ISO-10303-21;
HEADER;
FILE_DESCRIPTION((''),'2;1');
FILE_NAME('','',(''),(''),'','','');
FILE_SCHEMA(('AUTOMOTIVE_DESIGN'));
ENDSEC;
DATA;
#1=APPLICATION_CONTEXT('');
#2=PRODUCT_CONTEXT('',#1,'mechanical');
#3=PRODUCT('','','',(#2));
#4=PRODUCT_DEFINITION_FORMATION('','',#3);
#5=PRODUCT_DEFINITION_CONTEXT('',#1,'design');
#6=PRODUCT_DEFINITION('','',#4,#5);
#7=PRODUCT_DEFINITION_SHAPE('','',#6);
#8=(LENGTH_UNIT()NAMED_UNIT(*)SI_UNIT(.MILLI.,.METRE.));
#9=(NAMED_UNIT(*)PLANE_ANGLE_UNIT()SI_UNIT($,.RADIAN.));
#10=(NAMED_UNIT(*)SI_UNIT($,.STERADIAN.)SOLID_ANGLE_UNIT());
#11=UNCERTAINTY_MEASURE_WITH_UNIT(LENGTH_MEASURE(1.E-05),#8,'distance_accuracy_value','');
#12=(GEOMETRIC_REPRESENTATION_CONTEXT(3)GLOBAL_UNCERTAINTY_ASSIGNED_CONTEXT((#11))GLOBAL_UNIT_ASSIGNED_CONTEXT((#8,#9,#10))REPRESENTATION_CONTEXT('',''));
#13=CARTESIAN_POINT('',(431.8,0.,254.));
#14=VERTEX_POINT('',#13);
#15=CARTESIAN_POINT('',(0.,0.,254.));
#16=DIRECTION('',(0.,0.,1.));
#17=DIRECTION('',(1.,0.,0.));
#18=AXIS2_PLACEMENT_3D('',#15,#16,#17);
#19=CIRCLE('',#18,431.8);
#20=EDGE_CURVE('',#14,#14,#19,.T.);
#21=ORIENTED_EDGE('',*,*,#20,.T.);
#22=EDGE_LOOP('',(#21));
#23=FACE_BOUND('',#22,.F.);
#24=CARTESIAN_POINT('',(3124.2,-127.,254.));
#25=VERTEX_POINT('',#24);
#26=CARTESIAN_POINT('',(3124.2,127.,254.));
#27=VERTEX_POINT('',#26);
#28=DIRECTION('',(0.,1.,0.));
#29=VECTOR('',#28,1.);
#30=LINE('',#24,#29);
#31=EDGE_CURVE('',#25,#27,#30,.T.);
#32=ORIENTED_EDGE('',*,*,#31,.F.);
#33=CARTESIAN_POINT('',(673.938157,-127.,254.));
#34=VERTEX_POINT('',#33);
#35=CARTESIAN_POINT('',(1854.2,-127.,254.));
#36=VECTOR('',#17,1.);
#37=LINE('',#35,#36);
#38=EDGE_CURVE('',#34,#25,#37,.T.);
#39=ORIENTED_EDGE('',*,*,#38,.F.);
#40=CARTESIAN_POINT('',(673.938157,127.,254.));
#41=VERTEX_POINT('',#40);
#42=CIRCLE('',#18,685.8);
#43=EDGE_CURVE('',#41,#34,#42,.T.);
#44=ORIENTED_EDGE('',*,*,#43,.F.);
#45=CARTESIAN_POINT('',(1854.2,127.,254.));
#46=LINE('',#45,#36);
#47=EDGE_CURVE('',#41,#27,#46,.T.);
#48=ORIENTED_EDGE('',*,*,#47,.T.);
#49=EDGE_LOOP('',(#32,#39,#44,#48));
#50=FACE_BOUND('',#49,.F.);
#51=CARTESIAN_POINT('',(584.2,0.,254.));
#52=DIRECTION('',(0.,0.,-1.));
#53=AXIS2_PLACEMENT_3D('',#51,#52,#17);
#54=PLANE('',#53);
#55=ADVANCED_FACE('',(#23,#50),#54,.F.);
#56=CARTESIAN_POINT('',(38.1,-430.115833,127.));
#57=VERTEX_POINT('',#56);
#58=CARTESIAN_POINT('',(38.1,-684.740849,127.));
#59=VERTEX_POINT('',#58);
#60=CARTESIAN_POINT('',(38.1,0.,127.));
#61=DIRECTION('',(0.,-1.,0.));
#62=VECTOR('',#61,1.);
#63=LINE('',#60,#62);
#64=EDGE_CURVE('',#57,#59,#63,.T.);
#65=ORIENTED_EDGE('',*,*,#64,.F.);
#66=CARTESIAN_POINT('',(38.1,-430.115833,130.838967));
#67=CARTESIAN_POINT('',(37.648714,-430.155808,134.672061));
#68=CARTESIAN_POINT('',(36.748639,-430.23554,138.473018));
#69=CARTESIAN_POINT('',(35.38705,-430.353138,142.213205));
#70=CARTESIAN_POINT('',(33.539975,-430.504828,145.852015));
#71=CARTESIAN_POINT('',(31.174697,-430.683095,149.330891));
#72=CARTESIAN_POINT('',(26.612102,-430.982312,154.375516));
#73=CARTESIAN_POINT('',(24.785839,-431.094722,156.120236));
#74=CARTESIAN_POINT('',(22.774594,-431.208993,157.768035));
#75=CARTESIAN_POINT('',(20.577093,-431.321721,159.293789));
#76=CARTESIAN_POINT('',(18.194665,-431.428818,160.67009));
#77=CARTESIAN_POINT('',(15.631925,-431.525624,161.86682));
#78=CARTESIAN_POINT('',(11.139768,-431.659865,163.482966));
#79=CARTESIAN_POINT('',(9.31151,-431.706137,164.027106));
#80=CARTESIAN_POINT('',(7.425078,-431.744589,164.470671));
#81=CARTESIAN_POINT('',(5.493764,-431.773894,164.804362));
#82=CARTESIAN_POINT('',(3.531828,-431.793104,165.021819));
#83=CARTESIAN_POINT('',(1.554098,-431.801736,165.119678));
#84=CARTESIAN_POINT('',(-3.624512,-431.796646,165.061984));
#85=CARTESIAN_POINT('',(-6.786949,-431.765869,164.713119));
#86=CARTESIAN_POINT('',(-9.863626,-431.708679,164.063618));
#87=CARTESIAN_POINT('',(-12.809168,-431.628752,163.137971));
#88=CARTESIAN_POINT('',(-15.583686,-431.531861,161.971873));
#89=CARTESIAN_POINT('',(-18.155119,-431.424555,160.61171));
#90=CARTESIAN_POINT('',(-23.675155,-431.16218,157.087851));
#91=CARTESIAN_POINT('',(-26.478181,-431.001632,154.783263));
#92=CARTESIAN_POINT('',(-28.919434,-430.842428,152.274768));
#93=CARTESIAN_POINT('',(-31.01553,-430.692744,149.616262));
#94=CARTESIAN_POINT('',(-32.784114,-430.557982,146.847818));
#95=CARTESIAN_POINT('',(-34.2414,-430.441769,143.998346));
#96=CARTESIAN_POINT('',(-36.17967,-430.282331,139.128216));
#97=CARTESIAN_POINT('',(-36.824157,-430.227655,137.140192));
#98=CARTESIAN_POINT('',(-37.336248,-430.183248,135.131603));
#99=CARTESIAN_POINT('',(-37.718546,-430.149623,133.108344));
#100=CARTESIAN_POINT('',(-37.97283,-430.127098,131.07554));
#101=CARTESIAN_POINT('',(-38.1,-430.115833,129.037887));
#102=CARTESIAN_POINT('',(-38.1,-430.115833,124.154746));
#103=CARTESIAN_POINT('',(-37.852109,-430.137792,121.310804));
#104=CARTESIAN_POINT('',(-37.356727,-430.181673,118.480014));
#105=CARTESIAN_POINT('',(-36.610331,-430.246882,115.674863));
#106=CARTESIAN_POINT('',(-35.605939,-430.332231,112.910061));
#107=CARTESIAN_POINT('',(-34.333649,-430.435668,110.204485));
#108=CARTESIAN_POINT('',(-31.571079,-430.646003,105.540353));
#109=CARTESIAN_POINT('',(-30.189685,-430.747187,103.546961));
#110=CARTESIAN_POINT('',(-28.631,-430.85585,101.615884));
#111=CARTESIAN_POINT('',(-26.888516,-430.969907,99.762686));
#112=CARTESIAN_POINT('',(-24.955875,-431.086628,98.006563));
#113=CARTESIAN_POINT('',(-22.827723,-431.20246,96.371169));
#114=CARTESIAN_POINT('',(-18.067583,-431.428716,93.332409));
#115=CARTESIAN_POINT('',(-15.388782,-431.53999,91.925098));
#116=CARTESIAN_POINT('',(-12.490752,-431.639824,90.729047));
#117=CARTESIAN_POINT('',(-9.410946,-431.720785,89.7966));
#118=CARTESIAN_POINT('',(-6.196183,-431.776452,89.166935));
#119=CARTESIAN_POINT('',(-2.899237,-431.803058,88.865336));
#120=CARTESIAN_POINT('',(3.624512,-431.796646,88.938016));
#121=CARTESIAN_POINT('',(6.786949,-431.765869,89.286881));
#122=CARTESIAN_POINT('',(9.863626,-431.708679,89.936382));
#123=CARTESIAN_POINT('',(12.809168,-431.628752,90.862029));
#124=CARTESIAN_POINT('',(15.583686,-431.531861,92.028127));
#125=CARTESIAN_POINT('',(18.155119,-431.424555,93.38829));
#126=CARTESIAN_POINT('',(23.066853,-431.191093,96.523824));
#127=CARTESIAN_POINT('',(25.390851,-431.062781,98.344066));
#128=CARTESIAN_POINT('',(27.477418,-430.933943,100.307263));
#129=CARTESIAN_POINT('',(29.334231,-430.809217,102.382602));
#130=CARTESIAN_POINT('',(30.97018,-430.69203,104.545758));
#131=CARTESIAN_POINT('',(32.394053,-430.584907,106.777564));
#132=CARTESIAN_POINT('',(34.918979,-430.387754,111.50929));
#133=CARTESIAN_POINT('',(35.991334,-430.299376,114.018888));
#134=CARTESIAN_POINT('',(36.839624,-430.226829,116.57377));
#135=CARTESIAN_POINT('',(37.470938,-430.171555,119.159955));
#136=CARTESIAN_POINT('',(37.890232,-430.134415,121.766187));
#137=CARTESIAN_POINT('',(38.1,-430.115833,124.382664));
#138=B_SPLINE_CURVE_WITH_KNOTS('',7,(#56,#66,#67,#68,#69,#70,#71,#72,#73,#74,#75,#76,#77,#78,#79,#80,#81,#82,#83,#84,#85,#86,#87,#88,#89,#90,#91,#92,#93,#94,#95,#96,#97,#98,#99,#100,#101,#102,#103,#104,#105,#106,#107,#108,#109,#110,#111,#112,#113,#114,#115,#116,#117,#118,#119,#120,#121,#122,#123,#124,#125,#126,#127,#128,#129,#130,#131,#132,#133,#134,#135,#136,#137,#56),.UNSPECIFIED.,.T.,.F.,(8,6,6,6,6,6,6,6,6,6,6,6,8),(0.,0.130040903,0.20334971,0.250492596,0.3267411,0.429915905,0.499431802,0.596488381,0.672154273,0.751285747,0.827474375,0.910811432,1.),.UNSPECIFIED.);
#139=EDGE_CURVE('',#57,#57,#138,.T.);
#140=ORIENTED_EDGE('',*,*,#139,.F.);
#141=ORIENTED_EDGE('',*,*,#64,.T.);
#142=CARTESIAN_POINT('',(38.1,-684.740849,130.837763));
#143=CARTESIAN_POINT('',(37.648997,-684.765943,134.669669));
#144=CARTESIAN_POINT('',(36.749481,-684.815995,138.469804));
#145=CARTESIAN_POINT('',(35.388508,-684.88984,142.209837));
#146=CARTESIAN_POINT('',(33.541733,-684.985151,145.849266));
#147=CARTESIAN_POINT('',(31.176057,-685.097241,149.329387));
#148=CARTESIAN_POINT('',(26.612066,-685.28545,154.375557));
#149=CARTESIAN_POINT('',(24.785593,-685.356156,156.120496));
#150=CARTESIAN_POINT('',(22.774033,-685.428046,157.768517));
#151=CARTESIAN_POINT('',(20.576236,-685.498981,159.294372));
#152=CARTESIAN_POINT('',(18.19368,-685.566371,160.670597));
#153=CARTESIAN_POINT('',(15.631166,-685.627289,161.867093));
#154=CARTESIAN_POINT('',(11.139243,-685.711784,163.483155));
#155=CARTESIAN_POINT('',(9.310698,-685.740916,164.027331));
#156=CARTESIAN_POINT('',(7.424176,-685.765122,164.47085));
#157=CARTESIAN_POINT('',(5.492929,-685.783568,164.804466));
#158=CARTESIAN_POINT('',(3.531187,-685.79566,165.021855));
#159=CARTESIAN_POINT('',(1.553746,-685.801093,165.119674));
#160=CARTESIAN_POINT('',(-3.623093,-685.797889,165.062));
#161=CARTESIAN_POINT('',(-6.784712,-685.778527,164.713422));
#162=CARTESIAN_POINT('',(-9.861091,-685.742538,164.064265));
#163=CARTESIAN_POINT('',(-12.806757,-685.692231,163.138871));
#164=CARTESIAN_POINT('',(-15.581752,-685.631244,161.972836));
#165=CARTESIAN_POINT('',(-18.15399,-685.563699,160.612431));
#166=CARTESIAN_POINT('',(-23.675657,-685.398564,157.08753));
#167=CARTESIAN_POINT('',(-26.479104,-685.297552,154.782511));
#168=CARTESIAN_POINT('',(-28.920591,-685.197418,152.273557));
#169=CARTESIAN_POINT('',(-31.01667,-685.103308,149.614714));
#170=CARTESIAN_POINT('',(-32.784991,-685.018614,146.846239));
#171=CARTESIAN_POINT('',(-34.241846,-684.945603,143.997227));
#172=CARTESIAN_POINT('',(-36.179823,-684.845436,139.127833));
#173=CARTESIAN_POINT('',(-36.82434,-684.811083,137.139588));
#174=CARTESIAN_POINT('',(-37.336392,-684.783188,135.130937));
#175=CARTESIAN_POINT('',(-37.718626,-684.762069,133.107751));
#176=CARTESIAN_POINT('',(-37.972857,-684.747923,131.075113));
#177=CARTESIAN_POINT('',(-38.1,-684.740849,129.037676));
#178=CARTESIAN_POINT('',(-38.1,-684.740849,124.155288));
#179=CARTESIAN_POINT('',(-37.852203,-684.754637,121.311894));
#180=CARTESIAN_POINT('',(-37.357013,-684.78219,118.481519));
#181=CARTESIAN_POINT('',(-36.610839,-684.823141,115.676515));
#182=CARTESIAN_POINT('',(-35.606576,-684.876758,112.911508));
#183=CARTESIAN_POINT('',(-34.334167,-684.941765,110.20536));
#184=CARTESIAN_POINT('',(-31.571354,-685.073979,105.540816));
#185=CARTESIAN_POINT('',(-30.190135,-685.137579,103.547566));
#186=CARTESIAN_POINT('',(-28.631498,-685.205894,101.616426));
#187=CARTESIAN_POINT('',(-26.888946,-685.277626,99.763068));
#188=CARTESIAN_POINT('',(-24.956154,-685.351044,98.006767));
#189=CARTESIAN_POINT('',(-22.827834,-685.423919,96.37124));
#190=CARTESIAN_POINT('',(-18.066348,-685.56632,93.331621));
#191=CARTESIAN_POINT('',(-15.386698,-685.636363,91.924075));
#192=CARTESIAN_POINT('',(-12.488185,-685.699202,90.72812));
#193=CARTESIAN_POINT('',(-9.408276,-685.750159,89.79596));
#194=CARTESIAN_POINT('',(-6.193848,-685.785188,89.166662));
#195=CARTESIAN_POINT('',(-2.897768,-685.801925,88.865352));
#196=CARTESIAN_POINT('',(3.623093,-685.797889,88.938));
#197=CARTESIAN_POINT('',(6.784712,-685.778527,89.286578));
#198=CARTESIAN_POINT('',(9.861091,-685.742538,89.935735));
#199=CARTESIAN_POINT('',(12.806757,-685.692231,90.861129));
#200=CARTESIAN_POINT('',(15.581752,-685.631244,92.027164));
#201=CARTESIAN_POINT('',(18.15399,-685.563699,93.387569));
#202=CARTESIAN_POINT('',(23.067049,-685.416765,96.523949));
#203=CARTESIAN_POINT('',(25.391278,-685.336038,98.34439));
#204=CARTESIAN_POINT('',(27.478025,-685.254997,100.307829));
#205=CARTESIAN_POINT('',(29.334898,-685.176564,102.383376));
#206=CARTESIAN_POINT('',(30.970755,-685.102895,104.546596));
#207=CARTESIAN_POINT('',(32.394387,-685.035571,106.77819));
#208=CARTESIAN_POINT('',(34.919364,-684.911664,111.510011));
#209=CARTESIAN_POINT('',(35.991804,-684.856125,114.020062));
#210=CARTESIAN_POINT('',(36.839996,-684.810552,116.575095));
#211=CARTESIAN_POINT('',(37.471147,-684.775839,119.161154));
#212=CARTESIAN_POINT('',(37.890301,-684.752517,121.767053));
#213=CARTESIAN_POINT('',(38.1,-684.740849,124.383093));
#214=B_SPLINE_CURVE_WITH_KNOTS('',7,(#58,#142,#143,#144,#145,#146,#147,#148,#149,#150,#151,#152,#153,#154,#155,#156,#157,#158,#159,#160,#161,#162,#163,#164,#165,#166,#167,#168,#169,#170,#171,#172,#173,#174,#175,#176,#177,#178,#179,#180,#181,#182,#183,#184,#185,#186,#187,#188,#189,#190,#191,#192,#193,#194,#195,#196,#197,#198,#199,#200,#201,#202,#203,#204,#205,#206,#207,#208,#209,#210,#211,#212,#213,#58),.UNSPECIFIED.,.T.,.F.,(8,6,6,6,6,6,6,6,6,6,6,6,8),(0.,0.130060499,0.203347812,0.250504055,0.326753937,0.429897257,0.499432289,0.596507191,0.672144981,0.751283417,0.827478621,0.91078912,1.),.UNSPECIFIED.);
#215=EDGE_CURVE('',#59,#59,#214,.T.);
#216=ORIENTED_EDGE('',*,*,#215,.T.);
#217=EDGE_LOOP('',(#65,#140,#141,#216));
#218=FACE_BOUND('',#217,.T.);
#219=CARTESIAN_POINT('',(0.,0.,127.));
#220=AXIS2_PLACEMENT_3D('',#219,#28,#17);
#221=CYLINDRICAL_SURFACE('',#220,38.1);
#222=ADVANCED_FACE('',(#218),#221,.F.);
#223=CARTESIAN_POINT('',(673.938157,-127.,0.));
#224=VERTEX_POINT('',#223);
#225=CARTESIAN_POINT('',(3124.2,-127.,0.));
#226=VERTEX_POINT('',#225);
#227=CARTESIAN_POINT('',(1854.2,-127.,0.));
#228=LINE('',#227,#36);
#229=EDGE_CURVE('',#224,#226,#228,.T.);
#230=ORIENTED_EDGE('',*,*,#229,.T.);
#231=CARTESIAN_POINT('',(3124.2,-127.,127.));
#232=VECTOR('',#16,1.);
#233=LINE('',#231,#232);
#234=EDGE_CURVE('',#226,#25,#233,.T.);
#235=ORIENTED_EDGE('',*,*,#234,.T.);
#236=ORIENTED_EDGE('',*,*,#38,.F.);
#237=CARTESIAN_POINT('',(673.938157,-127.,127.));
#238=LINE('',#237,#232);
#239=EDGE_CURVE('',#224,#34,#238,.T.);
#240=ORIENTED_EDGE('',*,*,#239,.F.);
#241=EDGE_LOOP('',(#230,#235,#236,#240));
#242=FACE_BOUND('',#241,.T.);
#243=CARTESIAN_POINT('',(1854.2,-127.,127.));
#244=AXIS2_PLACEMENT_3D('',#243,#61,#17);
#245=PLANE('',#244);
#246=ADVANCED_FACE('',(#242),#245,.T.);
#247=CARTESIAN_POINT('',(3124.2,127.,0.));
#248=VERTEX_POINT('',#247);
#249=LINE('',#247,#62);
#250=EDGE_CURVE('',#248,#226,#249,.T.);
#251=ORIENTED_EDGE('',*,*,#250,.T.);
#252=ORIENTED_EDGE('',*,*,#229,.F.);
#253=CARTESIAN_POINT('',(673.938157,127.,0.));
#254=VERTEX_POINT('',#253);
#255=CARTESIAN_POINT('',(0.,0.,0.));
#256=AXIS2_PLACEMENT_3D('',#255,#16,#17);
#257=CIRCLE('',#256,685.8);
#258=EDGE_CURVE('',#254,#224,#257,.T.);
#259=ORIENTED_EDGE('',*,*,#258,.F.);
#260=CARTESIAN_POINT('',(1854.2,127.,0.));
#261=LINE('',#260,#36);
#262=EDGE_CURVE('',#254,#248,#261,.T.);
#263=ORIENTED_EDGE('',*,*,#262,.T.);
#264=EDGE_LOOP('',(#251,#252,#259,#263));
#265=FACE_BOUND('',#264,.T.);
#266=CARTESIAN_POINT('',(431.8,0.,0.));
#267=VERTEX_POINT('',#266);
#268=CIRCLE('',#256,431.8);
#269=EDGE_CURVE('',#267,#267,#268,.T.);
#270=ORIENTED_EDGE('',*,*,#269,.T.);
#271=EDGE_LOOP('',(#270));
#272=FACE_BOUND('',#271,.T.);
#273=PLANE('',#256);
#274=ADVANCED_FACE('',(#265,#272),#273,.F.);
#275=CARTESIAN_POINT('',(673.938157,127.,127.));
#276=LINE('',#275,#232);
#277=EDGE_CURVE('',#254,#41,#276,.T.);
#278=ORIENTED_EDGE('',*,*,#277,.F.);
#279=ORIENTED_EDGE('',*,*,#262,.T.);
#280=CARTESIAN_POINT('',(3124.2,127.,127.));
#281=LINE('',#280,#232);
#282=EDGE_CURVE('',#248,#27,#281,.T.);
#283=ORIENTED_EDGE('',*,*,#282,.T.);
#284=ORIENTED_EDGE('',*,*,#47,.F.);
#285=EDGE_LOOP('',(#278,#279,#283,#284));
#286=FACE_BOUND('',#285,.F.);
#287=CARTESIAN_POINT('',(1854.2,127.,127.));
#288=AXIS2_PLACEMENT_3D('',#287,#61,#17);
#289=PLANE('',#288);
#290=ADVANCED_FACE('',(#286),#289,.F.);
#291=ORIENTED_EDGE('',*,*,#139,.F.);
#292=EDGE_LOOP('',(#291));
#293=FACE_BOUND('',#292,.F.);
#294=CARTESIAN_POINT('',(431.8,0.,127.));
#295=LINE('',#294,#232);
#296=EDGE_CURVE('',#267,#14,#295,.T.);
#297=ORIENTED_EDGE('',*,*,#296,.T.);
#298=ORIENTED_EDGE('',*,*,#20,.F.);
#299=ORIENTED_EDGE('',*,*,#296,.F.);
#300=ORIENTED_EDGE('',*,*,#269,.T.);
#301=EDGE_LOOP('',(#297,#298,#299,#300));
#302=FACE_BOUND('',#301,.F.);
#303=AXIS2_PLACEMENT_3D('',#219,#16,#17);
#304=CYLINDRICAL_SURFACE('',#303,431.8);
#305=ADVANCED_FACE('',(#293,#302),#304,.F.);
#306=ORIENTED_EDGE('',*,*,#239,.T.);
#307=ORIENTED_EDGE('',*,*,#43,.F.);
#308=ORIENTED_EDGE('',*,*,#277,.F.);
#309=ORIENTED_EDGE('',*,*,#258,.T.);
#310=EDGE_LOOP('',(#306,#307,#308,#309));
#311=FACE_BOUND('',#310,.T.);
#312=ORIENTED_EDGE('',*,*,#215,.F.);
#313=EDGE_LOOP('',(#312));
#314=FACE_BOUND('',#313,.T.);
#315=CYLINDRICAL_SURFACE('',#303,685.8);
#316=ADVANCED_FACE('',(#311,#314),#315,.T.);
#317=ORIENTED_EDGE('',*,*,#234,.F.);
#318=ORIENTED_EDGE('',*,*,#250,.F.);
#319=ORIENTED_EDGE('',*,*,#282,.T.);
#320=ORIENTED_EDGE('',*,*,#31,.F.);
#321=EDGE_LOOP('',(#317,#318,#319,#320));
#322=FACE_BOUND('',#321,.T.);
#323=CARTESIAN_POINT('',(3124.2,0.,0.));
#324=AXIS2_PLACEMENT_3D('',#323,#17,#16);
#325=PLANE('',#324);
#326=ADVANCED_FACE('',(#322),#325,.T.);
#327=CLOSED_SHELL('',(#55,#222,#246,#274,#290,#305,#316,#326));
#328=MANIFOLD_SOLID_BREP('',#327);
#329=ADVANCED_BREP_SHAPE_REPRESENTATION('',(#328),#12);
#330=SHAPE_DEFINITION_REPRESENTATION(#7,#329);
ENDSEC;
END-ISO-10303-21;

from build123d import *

# Parameters (mm, degrees)
F0_W     = 254
F0_H     = 254
F3_W     = 2540
F3_H     = 254
F4_DEPTH = 127
F6_DEPTH = 685.801


# Not quite as in the source:
# - a feature names something its author has since deleted; it is built from what else it names


with BuildPart() as f2:
    # F0 (on Front) → F2 (revolve)
    with BuildSketch(Plane.XZ):
        with Locations((558.8, 127)):
            Rectangle(F0_W, F0_H)
    revolve(axis=Axis((0, 0, 38.9041751623), (0, 0, 1)))

    # F3 (on Front) → F4 (join, symmetric)
    with BuildSketch(Plane.XZ):
        with Locations((1854.2, 127)):
            Rectangle(F3_W, F3_H)
    extrude(amount=F4_DEPTH, both=True)

    # F5 (on Front) → F6 (cut, through all)
    with BuildSketch(Plane.XZ):
        with BuildLine():
            ThreePointArc((0, 88.9), (26.9407683632, 100.0592316368), (38.1, 127))
            ThreePointArc((38.1, 127), (-26.9407683632, 153.9407683632), (0, 88.9))
        make_face()
    extrude(amount=F6_DEPTH, mode=Mode.SUBTRACT)


solid = f2.part
